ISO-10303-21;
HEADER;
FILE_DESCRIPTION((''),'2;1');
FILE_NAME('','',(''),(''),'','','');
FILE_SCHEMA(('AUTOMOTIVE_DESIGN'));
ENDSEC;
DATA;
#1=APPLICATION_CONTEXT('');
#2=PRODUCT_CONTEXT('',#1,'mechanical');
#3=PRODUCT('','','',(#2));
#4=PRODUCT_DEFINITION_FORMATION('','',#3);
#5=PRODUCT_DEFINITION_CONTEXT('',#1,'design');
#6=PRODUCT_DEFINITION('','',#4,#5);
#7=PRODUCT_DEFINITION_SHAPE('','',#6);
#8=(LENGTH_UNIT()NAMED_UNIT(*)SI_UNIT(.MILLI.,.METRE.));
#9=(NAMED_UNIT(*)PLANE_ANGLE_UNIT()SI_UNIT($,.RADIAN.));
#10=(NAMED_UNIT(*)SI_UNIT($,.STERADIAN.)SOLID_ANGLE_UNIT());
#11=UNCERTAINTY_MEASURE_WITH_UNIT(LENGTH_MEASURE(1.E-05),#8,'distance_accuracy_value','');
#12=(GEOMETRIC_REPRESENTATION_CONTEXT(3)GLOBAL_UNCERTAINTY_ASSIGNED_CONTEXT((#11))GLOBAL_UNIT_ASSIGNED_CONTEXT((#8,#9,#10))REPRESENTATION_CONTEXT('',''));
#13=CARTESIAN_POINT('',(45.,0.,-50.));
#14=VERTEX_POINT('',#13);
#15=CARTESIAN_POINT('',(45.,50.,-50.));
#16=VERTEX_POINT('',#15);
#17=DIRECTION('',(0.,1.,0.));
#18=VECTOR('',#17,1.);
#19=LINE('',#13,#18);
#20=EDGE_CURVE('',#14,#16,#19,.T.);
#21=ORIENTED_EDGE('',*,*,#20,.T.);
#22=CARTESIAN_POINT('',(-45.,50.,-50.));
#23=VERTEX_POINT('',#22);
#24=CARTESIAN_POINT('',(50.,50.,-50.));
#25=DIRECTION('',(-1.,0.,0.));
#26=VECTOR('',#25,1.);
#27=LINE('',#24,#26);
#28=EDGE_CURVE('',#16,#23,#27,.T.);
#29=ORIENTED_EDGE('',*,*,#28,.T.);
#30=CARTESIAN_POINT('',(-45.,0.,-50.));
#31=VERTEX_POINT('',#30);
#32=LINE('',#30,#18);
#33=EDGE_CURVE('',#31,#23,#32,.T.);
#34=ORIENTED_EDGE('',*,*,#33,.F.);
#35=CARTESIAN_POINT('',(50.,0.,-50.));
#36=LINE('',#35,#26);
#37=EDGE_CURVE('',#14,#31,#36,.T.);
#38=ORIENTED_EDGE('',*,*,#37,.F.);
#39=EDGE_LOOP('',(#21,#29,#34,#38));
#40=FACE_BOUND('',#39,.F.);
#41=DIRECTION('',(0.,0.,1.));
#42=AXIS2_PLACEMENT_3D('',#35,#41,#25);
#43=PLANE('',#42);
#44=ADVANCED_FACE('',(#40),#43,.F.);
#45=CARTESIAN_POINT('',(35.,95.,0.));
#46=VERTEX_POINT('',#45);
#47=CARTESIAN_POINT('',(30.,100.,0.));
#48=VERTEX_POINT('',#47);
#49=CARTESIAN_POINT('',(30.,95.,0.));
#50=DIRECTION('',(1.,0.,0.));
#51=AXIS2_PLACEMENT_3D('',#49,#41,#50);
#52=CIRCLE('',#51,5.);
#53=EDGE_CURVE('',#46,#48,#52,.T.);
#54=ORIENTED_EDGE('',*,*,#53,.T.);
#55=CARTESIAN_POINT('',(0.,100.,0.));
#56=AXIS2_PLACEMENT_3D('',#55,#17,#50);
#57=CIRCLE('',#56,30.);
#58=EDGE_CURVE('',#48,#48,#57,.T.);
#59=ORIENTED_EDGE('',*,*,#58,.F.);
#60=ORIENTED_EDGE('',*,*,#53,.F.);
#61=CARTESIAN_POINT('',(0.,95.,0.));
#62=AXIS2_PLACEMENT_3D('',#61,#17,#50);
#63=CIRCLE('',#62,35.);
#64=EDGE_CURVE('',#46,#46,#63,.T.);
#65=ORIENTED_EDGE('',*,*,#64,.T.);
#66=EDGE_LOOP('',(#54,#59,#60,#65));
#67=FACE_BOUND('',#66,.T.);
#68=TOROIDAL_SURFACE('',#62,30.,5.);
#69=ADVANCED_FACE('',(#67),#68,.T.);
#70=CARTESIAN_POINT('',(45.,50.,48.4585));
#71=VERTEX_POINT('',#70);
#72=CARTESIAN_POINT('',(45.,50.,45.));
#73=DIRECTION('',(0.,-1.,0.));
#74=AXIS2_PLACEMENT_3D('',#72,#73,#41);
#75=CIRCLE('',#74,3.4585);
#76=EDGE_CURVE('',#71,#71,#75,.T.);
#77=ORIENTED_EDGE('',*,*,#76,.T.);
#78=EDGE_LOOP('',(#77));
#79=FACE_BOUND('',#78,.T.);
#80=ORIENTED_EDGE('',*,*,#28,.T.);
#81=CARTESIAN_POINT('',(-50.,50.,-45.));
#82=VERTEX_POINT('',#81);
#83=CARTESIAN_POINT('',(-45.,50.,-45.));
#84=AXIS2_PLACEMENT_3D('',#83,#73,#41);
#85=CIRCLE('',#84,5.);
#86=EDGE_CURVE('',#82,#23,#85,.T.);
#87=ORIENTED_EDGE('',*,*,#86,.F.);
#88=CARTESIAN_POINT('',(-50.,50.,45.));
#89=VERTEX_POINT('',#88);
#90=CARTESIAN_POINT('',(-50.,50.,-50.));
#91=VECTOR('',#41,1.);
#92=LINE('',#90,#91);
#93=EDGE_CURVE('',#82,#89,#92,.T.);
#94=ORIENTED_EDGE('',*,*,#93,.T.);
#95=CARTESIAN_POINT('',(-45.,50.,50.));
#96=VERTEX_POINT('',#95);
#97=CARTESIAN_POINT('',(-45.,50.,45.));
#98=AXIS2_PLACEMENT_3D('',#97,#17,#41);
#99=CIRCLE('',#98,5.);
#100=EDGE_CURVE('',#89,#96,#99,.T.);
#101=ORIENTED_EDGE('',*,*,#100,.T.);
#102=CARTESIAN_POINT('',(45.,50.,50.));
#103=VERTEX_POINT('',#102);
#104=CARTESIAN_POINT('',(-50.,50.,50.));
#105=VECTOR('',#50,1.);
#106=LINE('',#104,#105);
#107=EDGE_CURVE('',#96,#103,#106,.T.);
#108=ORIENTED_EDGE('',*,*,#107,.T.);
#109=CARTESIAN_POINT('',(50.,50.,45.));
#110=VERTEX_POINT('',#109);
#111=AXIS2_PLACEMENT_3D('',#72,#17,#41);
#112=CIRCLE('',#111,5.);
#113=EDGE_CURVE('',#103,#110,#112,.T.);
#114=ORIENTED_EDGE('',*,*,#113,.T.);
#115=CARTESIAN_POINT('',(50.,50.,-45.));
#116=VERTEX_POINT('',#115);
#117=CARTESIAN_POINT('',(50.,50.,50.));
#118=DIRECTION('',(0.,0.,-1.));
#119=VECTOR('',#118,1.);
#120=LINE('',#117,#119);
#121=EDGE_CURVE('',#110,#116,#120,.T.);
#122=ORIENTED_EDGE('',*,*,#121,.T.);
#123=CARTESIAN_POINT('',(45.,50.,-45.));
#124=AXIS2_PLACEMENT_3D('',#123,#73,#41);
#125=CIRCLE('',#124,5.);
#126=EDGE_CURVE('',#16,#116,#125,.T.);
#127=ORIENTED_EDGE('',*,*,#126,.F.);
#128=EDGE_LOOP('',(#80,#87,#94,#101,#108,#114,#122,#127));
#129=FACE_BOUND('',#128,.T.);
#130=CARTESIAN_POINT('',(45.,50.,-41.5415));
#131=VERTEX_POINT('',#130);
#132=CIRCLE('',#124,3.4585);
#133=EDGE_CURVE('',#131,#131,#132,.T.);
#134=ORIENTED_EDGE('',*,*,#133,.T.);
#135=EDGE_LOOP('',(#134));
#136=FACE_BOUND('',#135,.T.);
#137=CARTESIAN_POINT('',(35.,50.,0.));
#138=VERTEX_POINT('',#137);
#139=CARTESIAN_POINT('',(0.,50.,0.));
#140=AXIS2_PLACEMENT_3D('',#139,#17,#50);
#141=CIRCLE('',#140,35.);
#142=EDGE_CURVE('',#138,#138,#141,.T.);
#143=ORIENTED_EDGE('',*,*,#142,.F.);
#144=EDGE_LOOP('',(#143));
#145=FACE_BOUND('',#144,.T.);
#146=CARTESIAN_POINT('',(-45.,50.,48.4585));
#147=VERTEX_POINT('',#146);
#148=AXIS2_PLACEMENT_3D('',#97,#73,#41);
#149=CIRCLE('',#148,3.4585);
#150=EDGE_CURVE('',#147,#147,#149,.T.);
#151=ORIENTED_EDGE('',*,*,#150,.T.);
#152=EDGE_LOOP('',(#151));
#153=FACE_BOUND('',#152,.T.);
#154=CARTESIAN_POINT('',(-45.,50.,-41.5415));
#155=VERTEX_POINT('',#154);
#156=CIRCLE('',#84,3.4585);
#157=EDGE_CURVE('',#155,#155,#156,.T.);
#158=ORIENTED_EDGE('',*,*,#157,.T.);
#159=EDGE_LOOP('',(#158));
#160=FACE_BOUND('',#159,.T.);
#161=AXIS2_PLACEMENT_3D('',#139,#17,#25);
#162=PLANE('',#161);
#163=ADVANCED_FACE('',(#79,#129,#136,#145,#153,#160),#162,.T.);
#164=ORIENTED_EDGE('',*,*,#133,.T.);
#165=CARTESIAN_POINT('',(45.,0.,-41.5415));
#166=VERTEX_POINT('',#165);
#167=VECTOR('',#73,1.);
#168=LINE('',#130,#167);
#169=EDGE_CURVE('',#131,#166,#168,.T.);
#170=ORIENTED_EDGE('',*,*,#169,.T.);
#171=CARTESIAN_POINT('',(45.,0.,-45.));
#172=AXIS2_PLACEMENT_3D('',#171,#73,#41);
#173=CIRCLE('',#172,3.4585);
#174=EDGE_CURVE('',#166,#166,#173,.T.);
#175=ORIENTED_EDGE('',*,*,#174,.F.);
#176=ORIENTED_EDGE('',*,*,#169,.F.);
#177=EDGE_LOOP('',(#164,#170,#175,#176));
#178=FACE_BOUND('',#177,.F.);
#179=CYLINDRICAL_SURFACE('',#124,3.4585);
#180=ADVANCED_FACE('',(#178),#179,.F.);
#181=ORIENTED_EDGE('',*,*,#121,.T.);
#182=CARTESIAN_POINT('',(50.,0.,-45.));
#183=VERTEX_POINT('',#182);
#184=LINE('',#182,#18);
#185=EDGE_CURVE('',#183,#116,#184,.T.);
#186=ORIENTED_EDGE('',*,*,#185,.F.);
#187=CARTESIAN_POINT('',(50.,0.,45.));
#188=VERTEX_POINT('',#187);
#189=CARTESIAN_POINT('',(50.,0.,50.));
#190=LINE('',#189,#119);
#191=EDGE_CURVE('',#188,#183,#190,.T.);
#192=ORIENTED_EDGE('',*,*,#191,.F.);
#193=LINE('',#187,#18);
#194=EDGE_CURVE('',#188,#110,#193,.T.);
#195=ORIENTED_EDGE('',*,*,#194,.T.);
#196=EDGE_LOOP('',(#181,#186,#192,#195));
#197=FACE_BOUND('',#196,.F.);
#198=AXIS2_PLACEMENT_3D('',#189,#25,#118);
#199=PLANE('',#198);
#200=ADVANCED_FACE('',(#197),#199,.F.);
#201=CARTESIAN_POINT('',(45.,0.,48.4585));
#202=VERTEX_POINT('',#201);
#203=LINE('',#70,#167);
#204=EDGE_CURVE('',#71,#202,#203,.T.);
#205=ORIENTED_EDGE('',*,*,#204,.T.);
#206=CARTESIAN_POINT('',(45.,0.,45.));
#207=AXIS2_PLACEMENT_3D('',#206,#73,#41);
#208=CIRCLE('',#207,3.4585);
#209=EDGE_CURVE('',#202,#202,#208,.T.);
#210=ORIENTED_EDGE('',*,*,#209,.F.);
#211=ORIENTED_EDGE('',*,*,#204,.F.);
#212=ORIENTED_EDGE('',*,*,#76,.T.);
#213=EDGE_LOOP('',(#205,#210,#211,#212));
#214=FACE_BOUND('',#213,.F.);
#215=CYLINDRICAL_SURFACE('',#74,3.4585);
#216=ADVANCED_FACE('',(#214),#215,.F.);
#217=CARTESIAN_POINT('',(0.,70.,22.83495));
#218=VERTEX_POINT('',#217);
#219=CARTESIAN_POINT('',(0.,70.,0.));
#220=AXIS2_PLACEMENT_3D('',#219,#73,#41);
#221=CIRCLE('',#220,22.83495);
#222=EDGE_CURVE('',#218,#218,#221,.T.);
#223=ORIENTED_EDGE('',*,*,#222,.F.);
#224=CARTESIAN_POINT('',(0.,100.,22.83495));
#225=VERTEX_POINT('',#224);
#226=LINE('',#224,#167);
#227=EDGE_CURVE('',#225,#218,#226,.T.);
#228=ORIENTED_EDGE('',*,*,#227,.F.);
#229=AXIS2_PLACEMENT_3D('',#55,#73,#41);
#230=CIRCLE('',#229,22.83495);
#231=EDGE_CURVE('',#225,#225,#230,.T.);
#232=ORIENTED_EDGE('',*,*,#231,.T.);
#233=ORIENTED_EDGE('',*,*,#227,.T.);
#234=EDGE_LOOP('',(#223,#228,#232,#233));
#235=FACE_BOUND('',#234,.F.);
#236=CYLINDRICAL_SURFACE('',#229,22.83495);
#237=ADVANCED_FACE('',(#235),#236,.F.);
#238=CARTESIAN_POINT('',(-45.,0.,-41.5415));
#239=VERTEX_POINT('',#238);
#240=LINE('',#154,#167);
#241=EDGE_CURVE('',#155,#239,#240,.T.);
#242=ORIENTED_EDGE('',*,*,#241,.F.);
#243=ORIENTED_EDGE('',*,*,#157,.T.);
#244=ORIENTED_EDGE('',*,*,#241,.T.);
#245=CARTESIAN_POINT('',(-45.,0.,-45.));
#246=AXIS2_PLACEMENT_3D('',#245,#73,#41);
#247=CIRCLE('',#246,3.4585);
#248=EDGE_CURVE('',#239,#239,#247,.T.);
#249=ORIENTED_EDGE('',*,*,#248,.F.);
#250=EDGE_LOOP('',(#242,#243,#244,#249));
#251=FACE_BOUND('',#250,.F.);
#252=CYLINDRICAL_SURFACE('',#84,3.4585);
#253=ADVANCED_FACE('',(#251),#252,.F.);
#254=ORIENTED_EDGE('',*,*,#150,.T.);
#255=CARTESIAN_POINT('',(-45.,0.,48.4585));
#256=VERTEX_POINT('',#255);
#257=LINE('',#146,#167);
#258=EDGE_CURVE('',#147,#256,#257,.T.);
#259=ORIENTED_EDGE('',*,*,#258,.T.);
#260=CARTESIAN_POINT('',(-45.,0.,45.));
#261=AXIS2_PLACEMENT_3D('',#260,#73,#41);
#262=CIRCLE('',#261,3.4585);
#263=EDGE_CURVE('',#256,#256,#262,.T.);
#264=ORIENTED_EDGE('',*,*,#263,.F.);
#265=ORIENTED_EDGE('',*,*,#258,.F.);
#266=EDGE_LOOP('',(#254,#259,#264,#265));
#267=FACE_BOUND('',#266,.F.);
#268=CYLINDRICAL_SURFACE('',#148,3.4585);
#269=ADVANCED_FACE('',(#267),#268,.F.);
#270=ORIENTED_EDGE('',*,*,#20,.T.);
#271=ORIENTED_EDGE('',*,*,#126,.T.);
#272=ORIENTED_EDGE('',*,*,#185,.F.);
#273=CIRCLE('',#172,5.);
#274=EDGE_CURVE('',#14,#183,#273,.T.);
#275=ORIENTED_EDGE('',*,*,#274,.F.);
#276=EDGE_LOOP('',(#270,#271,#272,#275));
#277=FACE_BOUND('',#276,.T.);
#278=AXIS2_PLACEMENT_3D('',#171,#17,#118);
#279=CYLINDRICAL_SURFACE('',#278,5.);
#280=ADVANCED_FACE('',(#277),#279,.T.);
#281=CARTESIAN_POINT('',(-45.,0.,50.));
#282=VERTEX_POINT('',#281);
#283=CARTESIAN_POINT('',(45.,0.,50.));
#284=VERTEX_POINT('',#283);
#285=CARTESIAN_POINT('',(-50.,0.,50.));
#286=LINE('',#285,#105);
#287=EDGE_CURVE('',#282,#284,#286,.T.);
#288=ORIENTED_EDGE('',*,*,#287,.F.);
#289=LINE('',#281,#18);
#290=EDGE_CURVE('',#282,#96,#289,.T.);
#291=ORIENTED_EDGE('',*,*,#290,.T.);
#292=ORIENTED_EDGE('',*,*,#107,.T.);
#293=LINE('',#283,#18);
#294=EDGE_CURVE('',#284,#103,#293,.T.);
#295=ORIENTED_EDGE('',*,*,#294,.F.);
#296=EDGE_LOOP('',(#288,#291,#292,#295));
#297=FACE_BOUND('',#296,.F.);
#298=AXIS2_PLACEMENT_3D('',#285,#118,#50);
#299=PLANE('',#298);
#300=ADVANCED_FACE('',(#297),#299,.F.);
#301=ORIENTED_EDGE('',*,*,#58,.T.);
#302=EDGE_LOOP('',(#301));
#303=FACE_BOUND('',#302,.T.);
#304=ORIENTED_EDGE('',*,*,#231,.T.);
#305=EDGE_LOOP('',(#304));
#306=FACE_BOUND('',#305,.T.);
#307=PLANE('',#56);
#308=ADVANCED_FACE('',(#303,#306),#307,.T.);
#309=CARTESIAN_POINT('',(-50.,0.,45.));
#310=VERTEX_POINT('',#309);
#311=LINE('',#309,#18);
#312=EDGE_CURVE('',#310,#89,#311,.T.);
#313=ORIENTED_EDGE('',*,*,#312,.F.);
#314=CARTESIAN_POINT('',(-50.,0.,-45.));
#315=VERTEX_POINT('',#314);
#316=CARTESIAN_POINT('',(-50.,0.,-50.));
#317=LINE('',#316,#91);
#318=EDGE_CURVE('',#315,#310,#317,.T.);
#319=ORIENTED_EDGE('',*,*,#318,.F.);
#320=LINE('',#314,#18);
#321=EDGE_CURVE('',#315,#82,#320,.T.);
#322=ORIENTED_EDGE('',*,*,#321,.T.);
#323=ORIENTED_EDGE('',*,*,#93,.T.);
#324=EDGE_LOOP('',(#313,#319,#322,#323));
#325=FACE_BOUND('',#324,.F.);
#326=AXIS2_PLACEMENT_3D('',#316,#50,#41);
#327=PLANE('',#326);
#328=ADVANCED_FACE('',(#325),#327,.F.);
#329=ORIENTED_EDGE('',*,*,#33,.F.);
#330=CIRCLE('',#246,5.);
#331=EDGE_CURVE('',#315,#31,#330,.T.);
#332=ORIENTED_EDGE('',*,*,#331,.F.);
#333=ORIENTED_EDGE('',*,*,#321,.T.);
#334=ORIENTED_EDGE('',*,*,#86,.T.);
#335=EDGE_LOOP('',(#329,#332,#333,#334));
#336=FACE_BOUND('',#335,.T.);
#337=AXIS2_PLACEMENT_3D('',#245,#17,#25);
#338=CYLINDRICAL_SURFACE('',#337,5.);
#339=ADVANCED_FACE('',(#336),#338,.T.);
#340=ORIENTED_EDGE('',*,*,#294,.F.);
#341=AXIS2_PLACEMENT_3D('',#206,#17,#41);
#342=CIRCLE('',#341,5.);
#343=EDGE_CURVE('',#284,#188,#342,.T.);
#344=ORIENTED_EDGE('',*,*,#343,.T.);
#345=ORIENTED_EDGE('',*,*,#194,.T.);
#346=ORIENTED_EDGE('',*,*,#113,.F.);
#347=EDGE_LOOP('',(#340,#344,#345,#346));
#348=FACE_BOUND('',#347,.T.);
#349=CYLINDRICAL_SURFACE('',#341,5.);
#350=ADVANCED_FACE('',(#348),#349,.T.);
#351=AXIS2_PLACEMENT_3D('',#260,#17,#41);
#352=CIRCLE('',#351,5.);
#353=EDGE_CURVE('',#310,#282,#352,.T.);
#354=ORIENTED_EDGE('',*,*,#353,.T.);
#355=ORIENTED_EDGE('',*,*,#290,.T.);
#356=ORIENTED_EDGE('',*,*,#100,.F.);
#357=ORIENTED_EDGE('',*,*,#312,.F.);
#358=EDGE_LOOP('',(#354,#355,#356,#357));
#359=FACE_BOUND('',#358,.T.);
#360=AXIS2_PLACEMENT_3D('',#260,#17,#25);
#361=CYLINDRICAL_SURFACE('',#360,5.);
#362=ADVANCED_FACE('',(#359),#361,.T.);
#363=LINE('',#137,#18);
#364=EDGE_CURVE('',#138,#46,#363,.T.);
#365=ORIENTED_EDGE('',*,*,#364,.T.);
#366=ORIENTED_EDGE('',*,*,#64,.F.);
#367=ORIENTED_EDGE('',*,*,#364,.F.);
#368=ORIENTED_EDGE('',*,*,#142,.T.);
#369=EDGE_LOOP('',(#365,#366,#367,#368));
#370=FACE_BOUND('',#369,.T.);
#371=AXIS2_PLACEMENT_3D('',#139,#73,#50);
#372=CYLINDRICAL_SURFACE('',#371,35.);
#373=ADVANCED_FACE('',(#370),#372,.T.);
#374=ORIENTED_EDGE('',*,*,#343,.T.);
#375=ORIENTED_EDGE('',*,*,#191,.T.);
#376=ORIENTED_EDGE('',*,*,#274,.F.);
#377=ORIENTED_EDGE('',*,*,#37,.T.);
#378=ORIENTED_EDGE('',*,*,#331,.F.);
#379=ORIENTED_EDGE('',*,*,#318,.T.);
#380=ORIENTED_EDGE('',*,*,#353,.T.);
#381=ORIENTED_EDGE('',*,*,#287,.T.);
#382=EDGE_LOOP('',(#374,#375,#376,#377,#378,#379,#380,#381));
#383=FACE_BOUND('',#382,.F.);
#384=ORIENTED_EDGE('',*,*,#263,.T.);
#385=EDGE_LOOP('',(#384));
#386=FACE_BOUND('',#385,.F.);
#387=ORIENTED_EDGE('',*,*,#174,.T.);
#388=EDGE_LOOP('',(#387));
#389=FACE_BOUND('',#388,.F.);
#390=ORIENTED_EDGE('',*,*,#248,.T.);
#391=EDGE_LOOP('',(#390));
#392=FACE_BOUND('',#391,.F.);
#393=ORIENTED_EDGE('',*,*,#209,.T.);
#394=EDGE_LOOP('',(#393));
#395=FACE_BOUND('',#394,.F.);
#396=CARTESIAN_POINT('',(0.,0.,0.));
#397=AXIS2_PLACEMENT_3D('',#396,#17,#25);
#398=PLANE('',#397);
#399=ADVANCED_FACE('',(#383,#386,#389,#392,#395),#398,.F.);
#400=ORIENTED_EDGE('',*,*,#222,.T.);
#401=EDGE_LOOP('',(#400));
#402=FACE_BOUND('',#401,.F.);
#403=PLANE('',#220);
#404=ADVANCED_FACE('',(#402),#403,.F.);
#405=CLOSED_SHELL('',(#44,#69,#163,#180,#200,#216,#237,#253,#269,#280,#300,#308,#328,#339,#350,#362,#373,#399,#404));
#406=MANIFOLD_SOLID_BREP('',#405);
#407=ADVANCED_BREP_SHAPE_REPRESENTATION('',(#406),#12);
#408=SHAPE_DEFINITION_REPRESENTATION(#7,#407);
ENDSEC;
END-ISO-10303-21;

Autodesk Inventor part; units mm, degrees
ref_plane "YZ Plane" through (0, 0, 0) normal (1, 0, 0) x (0, 1, 0)
ref_plane "XZ Plane" through (0, 0, 0) normal (0, 1, 0) x (-1, 0, 0)
ref_plane "XY Plane" through (0, 0, 0) normal (0, 0, 1) x (1, 0, 0)
sketch "Boceto1" plane through (0, 0, 0) normal (0, 1, 0) x (-1, 0, 0)
  line L0 (50, 50) -> (-50, 50)
  line L1 (-50, 50) -> (-50, -50)
  line L2 (-50, -50) -> (50, -50)
  line L3 (50, -50) -> (50, 50)
  line L4 (50, 50) -> (-50, -50) construction
  line L5 (-50, 50) -> (50, -50) construction
  point P0 (0, 0)
  dimension "d0" = 100
  dimension "d1" = 100
sketch "Boceto2" plane through (0, 0, 0) normal (0, 1, 0) x (-1, 0, 0)
  point P0 (0, 0)
extrude "Extrusión1" add sketch "Boceto1" along normal blind 50
sketch "Boceto3" plane through (0, 50, 0) normal (0, 1, 0) x (1, 0, 0)
  line L0 (-50, 50) -> (-50, -50) projected
  line L1 (50, 50) -> (-50, 50) projected
  line L2 (50, -50) -> (50, 50) projected
  line L3 (-50, -50) -> (50, -50) projected
  point P0 (0, 0)
  point P1 (-45, -45)
  point P2 (-45, 45)
  point P3 (45, 45)
  point P4 (45, -45)
  dimension "d11" = 5
  dimension "d12" = 5
  dimension "d13" = 5
  dimension "d14" = 5
  dimension "d15" = 5
  dimension "d16" = 5
  dimension "d17" = 5
  dimension "d18" = 5
hole "Agujero1" at (-45, 50, 45) at (-45, 50, -45) at (45, 50, -45) at (45, 50, 45) direction (0, -1, 0) diameter 6.917 end through all counterbore diameter 8 counterbore depth 0 thread size "M8x1" class "6H" standard "ANSI Metric M Profile"
fillet "Empalme1" radius 5 4 edges at (-50, 25, 50) (50, 25, 50) (50, 25, -50) (-50, 25, -50)
sketch "Boceto4" plane through (0, 50, 0) normal (0, 1, 0) x (1, 0, 0)
  point P0 (0, 0)
sketch "Boceto5" plane through (0, 50, 0) normal (0, 1, 0) x (1, 0, 0)
  circle A0 centre (0, 0) radius 35
  dimension "d20" = 70
extrude "Extrusión2" add sketch "Boceto5" along normal blind 50
fillet "Empalme2" radius 5 1 edges at (-35, 100, 0)
sketch "Boceto7" plane through (0, 100, 0) normal (0, 1, 0) x (1, 0, 0)
  point P0 (0, 0)
hole "Agujero3" at (0, 100, 0) direction (0, -1, 0) diameter 45.6699 depth 30 counterbore diameter 50 counterbore depth 0 thread size "M50x4" class "6H" standard "ANSI Metric M Profile"
properties part number "Practica1Inventor"
